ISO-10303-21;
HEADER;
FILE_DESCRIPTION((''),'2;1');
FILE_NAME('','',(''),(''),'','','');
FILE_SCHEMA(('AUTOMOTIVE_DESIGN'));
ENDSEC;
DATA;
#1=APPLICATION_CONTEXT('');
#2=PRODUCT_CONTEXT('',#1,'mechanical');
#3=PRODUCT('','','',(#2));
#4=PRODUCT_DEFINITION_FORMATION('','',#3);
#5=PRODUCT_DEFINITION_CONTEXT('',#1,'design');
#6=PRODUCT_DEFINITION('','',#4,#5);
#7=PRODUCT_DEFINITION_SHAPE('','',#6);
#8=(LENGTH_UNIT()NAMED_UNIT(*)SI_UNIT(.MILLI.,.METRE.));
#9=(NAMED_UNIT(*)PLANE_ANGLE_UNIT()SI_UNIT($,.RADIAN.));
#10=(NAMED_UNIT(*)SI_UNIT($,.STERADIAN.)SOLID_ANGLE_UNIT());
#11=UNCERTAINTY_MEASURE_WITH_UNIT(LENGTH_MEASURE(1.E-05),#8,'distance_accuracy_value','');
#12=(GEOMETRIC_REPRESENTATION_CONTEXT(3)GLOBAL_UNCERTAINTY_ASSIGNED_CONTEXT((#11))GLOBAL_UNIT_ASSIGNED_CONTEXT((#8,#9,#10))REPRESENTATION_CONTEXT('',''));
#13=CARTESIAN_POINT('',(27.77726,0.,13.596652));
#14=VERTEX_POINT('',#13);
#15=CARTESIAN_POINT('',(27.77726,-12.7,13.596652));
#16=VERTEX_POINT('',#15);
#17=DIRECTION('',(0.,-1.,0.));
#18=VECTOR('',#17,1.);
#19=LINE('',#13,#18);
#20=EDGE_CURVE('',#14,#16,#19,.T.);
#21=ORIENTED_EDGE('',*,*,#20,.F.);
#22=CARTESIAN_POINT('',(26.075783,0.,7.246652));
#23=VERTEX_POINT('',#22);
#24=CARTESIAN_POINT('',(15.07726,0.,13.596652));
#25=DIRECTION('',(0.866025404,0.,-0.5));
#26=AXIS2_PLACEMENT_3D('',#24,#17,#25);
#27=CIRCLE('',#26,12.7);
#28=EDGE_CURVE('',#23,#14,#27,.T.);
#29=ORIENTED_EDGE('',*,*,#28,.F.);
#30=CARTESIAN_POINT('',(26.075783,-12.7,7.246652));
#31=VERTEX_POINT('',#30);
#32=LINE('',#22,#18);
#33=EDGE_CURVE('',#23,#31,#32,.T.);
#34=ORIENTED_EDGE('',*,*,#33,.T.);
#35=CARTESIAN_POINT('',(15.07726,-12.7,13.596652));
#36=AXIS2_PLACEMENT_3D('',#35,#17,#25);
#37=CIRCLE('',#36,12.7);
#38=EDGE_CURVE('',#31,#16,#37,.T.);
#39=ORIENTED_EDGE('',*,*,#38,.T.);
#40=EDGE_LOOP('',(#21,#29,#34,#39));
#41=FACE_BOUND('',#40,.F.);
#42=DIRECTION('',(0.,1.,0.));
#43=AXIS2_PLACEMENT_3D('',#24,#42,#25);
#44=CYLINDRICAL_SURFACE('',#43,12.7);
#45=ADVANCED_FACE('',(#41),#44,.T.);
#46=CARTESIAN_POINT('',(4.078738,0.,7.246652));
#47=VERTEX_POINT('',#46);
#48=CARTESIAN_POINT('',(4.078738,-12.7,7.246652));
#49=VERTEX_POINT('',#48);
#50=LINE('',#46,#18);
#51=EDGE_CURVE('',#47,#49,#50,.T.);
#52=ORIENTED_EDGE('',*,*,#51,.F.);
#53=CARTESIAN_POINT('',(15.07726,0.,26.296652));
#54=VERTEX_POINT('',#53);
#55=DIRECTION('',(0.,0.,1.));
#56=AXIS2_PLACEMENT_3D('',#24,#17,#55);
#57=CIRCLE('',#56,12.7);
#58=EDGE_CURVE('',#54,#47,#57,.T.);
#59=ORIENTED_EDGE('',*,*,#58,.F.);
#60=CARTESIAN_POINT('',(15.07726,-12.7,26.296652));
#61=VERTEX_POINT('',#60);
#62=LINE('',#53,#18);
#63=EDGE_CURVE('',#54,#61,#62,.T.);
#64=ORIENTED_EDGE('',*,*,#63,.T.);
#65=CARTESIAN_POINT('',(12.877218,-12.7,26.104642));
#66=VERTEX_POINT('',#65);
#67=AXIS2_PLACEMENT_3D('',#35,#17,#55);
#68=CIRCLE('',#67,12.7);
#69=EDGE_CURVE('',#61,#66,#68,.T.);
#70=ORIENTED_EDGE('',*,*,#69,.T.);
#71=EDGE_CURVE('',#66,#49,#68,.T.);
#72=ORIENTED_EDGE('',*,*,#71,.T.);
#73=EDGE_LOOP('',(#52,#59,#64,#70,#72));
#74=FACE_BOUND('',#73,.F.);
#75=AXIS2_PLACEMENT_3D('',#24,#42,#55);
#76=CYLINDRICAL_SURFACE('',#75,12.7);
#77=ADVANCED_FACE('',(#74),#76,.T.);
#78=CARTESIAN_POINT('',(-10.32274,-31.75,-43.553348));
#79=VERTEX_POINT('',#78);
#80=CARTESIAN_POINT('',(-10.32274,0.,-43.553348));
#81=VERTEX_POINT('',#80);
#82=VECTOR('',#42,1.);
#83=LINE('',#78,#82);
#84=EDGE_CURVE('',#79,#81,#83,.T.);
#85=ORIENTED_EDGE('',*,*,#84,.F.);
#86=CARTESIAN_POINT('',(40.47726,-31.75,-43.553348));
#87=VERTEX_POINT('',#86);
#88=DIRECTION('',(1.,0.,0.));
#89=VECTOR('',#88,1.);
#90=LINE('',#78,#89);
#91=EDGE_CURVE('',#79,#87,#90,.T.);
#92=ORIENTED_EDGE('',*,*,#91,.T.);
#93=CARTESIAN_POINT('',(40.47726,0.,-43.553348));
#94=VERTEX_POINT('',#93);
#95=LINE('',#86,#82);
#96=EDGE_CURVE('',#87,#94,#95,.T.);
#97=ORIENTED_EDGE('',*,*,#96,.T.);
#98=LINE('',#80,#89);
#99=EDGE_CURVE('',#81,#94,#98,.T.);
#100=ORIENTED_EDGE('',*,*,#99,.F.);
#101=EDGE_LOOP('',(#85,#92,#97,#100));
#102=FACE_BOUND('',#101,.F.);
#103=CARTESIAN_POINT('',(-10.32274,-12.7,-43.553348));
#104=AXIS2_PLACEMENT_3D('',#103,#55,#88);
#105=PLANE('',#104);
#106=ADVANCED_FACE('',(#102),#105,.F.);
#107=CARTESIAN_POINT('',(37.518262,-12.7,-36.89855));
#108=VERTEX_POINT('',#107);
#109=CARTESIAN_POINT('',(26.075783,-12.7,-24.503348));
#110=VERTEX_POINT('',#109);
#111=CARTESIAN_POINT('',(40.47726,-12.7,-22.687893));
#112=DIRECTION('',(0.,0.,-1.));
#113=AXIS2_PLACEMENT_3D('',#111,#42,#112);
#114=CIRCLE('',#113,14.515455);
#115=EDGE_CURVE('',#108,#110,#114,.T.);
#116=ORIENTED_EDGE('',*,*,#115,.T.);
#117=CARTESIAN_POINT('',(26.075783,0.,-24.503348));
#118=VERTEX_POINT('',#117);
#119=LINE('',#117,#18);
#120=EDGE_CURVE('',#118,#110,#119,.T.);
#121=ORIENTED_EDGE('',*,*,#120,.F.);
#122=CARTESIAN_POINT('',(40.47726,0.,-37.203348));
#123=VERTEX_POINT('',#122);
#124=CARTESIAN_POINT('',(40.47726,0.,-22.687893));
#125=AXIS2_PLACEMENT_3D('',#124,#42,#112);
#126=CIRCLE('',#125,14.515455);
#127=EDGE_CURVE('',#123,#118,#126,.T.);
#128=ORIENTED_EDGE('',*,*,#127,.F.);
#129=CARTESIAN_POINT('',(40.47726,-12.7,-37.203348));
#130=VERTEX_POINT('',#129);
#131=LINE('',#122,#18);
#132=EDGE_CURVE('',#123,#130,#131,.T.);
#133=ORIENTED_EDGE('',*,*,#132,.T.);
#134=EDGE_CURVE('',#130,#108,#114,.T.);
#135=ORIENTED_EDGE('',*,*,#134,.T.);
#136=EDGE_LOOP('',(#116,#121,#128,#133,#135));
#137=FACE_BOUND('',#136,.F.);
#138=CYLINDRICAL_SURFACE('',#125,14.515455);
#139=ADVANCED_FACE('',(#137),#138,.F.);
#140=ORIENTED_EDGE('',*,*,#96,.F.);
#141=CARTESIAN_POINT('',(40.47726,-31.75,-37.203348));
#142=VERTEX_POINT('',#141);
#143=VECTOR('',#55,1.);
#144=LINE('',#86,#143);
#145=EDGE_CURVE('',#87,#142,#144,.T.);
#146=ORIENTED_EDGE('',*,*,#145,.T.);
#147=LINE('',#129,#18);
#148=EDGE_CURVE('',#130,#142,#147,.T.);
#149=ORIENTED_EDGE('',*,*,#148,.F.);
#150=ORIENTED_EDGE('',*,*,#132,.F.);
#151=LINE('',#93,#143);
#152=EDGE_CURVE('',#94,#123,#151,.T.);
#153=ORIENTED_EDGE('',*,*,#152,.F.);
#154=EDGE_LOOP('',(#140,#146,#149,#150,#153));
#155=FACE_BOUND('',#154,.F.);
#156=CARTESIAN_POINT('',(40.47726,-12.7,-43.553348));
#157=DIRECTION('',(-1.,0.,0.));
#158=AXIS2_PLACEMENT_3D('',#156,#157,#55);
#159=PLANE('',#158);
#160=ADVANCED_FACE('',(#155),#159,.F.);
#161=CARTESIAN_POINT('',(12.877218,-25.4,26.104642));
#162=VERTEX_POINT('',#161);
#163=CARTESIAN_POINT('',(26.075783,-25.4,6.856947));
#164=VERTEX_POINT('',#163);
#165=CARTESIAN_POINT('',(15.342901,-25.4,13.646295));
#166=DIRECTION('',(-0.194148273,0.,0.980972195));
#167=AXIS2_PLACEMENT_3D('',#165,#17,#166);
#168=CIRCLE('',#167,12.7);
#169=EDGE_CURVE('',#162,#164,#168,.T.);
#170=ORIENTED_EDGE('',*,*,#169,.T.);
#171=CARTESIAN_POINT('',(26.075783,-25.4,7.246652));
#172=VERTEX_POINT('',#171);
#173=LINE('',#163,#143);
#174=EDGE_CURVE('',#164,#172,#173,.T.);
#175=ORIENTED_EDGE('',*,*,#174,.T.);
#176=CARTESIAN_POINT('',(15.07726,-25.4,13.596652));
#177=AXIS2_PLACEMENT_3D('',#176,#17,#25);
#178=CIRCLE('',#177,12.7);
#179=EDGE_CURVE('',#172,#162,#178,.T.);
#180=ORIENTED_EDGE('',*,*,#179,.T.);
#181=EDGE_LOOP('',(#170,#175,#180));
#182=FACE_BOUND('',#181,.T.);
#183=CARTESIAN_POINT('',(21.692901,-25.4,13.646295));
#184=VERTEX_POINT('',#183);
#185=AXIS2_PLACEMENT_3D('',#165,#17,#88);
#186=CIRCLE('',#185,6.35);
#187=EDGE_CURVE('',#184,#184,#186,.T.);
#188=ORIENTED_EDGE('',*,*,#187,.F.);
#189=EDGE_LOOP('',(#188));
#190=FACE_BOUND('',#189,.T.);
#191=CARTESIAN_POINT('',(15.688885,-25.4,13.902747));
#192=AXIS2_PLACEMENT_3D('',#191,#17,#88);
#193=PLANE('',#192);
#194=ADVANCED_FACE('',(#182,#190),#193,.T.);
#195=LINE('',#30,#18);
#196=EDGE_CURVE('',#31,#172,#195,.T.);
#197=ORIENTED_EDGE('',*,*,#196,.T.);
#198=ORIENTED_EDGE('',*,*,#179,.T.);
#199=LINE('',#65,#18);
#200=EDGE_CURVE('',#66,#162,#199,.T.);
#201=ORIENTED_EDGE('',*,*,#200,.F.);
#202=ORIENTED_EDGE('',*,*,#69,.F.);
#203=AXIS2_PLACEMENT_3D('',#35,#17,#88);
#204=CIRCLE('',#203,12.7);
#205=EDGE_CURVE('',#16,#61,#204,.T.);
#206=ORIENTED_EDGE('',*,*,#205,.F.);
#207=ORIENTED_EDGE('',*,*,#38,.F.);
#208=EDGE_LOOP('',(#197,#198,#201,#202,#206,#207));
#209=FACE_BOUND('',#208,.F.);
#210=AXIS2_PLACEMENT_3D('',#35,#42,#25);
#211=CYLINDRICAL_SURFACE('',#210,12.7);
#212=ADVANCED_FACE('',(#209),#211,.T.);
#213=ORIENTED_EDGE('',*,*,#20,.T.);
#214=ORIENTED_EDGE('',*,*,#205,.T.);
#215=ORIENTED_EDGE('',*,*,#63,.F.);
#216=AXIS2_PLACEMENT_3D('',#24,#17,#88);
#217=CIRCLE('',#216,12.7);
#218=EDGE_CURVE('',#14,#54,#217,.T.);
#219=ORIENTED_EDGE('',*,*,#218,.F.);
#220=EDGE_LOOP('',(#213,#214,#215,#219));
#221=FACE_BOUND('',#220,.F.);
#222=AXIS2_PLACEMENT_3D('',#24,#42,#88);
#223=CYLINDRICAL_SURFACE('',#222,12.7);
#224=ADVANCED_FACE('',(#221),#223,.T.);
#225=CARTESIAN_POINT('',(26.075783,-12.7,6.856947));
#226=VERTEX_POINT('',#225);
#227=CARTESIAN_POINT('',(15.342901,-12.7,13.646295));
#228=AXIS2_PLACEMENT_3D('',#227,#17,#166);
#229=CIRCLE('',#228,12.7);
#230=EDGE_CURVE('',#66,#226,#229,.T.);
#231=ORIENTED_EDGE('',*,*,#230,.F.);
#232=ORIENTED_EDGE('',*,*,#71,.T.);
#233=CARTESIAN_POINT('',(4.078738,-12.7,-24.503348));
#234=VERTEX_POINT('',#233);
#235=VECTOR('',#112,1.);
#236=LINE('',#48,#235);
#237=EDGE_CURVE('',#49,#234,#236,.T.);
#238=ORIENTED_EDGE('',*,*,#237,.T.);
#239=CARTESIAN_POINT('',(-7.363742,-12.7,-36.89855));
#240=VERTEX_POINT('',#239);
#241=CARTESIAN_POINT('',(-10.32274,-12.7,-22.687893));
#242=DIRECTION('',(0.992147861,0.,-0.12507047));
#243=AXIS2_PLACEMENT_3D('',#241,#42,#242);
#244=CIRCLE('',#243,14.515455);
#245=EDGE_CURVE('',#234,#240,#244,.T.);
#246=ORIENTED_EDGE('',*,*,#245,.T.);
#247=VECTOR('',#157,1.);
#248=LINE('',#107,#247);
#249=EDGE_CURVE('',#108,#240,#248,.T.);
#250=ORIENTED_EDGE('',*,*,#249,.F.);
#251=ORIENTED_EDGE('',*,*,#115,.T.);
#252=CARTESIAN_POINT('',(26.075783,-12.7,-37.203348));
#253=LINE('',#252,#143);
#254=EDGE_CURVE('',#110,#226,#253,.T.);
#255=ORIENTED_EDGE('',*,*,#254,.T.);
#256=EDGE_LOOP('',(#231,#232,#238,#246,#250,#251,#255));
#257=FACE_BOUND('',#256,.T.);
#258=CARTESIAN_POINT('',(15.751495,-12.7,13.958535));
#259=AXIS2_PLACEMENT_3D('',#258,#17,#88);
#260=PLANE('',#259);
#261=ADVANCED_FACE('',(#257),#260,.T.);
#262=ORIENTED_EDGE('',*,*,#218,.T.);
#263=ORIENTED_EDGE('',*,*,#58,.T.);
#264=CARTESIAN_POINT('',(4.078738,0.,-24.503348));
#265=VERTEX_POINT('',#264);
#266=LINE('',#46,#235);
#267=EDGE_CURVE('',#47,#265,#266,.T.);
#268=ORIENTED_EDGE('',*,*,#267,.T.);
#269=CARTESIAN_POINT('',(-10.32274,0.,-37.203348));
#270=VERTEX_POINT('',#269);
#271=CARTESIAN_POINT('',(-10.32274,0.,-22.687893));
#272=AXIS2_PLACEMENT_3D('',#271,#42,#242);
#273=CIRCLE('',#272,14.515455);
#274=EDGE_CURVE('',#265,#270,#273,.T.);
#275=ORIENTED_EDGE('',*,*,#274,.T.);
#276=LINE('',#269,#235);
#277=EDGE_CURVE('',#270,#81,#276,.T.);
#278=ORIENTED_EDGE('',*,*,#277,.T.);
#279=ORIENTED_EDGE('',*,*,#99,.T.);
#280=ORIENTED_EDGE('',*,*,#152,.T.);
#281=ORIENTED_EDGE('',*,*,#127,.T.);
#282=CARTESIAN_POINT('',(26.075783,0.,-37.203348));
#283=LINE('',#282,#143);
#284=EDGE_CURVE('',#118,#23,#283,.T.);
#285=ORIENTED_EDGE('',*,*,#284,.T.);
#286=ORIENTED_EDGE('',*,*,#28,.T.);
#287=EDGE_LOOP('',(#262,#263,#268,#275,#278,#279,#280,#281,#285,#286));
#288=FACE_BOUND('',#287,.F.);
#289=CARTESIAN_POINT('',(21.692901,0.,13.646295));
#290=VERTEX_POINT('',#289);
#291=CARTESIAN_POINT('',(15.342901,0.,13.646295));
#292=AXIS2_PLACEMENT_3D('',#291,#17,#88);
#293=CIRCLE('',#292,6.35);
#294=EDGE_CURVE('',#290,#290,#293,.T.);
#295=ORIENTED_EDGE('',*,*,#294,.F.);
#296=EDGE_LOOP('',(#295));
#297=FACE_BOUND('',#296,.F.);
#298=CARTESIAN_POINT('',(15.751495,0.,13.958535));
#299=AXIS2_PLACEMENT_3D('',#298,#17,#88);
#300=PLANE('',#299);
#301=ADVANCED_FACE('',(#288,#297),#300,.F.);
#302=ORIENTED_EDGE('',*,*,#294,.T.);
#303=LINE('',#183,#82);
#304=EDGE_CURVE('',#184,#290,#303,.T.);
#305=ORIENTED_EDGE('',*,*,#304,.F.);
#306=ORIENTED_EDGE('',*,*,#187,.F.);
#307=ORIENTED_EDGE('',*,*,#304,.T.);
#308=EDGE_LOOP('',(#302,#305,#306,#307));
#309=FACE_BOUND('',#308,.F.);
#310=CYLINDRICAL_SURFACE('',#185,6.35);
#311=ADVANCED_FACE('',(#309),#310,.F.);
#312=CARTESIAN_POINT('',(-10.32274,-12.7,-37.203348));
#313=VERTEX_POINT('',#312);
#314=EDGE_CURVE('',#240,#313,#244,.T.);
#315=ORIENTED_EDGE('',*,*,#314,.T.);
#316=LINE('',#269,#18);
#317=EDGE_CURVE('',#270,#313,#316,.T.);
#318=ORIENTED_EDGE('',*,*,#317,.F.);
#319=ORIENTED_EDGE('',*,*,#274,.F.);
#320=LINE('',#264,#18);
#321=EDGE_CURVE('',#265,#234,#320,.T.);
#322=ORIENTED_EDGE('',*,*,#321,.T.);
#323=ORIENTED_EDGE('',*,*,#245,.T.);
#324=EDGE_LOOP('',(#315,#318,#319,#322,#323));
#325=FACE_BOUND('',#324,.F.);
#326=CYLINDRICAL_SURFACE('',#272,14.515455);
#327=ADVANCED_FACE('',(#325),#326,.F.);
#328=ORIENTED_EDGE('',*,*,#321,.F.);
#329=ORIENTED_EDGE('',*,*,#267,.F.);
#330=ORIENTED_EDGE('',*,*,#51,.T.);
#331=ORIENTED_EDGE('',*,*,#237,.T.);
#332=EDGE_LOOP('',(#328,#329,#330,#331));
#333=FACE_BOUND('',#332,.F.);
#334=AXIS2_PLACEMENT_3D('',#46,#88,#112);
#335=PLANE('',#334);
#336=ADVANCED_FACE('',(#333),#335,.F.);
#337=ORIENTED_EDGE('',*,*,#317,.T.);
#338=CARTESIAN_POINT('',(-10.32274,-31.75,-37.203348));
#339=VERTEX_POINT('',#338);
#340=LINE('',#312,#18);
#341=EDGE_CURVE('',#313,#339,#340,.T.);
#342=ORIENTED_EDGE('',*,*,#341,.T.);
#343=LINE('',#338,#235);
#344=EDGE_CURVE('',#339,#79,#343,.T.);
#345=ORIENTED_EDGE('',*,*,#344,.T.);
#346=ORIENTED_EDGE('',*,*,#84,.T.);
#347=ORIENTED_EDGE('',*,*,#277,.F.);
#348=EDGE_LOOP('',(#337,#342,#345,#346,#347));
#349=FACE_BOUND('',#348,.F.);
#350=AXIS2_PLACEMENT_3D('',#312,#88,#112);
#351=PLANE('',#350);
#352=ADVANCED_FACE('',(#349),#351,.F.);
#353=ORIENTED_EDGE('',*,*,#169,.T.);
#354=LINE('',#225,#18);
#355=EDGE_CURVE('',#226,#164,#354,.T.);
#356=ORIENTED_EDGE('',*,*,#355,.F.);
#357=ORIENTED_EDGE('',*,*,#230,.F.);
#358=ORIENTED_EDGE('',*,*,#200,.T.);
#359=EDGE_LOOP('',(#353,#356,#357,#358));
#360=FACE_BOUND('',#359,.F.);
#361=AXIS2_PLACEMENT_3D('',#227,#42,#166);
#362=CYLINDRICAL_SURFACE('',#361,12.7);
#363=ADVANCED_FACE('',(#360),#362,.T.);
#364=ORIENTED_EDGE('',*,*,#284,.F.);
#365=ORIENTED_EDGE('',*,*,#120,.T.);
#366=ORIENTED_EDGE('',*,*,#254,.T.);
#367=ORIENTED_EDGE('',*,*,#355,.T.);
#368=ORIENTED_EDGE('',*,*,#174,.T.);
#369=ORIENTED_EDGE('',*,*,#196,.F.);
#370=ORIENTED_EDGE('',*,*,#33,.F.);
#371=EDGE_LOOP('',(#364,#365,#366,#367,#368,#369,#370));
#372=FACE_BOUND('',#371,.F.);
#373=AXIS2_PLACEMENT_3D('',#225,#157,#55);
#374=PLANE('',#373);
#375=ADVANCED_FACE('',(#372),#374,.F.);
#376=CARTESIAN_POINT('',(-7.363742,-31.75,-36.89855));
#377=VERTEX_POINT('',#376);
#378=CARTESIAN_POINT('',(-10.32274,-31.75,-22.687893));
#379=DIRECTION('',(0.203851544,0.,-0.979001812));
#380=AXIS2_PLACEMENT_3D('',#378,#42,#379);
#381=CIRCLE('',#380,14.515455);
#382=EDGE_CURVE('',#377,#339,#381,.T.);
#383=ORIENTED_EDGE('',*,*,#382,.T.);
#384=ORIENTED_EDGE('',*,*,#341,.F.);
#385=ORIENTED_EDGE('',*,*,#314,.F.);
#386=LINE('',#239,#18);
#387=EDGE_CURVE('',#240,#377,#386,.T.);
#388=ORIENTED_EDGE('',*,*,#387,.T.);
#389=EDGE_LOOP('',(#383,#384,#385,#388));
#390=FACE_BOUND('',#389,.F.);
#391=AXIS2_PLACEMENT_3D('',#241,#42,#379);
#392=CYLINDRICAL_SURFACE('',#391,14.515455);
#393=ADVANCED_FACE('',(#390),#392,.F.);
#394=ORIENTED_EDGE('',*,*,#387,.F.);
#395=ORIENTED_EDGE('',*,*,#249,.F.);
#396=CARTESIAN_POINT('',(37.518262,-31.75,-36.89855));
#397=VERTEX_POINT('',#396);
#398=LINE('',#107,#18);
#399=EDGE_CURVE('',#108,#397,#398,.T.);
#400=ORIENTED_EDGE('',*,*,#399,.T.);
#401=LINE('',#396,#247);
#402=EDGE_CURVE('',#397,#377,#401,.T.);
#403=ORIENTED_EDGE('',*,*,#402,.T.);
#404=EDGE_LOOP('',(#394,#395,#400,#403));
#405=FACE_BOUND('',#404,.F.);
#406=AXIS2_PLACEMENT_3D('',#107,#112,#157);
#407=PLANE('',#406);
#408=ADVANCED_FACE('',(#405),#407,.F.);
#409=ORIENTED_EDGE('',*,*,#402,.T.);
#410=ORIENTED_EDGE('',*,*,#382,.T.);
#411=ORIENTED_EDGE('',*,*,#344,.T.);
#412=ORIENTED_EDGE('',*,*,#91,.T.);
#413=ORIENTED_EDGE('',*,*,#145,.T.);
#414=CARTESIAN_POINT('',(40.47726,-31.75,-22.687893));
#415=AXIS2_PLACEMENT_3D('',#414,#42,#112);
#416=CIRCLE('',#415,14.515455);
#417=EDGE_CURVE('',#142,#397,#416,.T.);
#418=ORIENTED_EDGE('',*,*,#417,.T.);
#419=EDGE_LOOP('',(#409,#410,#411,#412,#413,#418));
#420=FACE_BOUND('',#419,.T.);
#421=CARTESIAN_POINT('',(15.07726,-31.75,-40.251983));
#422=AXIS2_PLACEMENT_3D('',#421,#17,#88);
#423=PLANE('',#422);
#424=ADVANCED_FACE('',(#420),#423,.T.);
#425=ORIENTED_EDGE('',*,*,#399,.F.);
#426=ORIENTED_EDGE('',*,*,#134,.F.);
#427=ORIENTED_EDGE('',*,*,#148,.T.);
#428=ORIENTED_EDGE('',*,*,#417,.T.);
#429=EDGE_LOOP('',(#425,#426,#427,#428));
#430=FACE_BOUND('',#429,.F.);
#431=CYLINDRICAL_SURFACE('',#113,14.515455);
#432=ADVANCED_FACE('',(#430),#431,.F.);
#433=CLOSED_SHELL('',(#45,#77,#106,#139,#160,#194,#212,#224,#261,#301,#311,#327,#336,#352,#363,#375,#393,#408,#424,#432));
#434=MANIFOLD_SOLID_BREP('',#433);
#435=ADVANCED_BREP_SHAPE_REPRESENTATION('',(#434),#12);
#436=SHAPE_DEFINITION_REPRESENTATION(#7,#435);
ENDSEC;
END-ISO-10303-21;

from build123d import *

# Parameters (mm, degrees)
F1_DEPTH = 12.7
F4_DEPTH = 19.05
F6_DEPTH = 12.7
F7_R     = 6.35
F8_DEPTH = 110.49


with BuildPart() as f1:
    # F0 (on Front) → F1 (new body)
    with BuildSketch(Plane.XZ):
        with BuildLine():
            ThreePointArc((27.7772603229, 13.5966521085), (24.0575164439, 22.5769082296), (15.0772603229, 26.2966521085))
            ThreePointArc((15.0772603229, 26.2966521085), (4.0787376948, 19.9466521085), (4.0787376948, 7.2466521085))
            ThreePointArc((4.0787376948, 7.2466521085), (15.0772603229, 0.8966521085), (26.0757829509, 7.2466521085))
            ThreePointArc((26.0757829509, 7.2466521085), (27.3445183167, 10.3096502357), (27.7772603229, 13.5966521085))
        make_face()
        with BuildLine():
            Line((4.0787376948, -24.5033478915), (4.0787376948, -37.2033478915))
            Line((4.0787376948, -37.2033478915), (26.0757829509, -37.2033478915))
            Line((26.0757829509, -37.2033478915), (26.0757829509, -24.5033478915))
            Line((26.0757829509, -24.5033478915), (26.0757829509, 7.2466521085))
            ThreePointArc((26.0757829509, 7.2466521085), (15.0772603229, 0.8966521085), (4.0787376948, 7.2466521085))
            Line((4.0787376948, 7.2466521085), (4.0787376948, -24.5033478915))
        make_face()
        with BuildLine():
            Line((26.0757829509, -24.5033478915), (26.0757829509, -37.2033478915))
            Line((26.0757829509, -37.2033478915), (40.4772603229, -37.2033478915))
            ThreePointArc((40.4772603229, -37.2033478915), (30.876576096, -33.5748251672), (26.0757829509, -24.5033478915))
        make_face()
        with BuildLine():
            ThreePointArc((4.0787376948, -24.5033478915), (-0.7220554503, -33.5748251672), (-10.3227396771, -37.2033478915))
            Line((-10.3227396771, -37.2033478915), (4.0787376948, -37.2033478915))
            Line((4.0787376948, -37.2033478915), (4.0787376948, -24.5033478915))
        make_face()
        Polygon((4.0787376948, -37.2033478915), (-10.3227396771, -37.2033478915), (-10.3227396771, -43.5533478915), (40.4772603229, -43.5533478915), (40.4772603229, -37.2033478915), (26.0757829509, -37.2033478915), align=None)
    extrude(amount=F1_DEPTH)

    # F3 (on face) → F4 (join)
    with BuildSketch(Plane.XZ.offset(12.7)):
        with BuildLine():
            ThreePointArc((40.4772603229, -37.2033478915), (38.989932999, -37.1269472667), (37.5182624684, -36.8985496461))
            Line((37.5182624684, -36.8985496461), (-7.3637418227, -36.8985496461))
            ThreePointArc((-7.3637418227, -36.8985496461), (-8.8354123533, -37.1269472667), (-10.3227396771, -37.2033478915))
            Line((-10.3227396771, -37.2033478915), (-10.3227396771, -43.5533478915))
            Line((-10.3227396771, -43.5533478915), (40.4772603229, -43.5533478915))
            Line((40.4772603229, -43.5533478915), (40.4772603229, -37.2033478915))
        make_face()
    extrude(amount=F4_DEPTH)

    # F5 (on face) → F6 (join)
    with BuildSketch(Plane.XZ.offset(12.7)):
        with BuildLine():
            ThreePointArc((26.0757829509, 7.2466521085), (25.482031486, 20.8788727205), (12.8772183881, 26.1046421743))
            ThreePointArc((12.8772183881, 26.1046421743), (4.8688817883, 6.4640315912), (26.0757829509, 6.8569466568))
            Line((26.0757829509, 6.8569466568), (26.0757829509, 7.2466521085))
        make_face()
    extrude(amount=F6_DEPTH)

    # F7 (on face) → F8 (cut)
    with BuildSketch(Plane.XZ.offset(25.4)):
        with Locations((15.3429014608, 13.6462952942)):
            Circle(F7_R)
    extrude(amount=-F8_DEPTH, mode=Mode.SUBTRACT)


solid = f1.part
